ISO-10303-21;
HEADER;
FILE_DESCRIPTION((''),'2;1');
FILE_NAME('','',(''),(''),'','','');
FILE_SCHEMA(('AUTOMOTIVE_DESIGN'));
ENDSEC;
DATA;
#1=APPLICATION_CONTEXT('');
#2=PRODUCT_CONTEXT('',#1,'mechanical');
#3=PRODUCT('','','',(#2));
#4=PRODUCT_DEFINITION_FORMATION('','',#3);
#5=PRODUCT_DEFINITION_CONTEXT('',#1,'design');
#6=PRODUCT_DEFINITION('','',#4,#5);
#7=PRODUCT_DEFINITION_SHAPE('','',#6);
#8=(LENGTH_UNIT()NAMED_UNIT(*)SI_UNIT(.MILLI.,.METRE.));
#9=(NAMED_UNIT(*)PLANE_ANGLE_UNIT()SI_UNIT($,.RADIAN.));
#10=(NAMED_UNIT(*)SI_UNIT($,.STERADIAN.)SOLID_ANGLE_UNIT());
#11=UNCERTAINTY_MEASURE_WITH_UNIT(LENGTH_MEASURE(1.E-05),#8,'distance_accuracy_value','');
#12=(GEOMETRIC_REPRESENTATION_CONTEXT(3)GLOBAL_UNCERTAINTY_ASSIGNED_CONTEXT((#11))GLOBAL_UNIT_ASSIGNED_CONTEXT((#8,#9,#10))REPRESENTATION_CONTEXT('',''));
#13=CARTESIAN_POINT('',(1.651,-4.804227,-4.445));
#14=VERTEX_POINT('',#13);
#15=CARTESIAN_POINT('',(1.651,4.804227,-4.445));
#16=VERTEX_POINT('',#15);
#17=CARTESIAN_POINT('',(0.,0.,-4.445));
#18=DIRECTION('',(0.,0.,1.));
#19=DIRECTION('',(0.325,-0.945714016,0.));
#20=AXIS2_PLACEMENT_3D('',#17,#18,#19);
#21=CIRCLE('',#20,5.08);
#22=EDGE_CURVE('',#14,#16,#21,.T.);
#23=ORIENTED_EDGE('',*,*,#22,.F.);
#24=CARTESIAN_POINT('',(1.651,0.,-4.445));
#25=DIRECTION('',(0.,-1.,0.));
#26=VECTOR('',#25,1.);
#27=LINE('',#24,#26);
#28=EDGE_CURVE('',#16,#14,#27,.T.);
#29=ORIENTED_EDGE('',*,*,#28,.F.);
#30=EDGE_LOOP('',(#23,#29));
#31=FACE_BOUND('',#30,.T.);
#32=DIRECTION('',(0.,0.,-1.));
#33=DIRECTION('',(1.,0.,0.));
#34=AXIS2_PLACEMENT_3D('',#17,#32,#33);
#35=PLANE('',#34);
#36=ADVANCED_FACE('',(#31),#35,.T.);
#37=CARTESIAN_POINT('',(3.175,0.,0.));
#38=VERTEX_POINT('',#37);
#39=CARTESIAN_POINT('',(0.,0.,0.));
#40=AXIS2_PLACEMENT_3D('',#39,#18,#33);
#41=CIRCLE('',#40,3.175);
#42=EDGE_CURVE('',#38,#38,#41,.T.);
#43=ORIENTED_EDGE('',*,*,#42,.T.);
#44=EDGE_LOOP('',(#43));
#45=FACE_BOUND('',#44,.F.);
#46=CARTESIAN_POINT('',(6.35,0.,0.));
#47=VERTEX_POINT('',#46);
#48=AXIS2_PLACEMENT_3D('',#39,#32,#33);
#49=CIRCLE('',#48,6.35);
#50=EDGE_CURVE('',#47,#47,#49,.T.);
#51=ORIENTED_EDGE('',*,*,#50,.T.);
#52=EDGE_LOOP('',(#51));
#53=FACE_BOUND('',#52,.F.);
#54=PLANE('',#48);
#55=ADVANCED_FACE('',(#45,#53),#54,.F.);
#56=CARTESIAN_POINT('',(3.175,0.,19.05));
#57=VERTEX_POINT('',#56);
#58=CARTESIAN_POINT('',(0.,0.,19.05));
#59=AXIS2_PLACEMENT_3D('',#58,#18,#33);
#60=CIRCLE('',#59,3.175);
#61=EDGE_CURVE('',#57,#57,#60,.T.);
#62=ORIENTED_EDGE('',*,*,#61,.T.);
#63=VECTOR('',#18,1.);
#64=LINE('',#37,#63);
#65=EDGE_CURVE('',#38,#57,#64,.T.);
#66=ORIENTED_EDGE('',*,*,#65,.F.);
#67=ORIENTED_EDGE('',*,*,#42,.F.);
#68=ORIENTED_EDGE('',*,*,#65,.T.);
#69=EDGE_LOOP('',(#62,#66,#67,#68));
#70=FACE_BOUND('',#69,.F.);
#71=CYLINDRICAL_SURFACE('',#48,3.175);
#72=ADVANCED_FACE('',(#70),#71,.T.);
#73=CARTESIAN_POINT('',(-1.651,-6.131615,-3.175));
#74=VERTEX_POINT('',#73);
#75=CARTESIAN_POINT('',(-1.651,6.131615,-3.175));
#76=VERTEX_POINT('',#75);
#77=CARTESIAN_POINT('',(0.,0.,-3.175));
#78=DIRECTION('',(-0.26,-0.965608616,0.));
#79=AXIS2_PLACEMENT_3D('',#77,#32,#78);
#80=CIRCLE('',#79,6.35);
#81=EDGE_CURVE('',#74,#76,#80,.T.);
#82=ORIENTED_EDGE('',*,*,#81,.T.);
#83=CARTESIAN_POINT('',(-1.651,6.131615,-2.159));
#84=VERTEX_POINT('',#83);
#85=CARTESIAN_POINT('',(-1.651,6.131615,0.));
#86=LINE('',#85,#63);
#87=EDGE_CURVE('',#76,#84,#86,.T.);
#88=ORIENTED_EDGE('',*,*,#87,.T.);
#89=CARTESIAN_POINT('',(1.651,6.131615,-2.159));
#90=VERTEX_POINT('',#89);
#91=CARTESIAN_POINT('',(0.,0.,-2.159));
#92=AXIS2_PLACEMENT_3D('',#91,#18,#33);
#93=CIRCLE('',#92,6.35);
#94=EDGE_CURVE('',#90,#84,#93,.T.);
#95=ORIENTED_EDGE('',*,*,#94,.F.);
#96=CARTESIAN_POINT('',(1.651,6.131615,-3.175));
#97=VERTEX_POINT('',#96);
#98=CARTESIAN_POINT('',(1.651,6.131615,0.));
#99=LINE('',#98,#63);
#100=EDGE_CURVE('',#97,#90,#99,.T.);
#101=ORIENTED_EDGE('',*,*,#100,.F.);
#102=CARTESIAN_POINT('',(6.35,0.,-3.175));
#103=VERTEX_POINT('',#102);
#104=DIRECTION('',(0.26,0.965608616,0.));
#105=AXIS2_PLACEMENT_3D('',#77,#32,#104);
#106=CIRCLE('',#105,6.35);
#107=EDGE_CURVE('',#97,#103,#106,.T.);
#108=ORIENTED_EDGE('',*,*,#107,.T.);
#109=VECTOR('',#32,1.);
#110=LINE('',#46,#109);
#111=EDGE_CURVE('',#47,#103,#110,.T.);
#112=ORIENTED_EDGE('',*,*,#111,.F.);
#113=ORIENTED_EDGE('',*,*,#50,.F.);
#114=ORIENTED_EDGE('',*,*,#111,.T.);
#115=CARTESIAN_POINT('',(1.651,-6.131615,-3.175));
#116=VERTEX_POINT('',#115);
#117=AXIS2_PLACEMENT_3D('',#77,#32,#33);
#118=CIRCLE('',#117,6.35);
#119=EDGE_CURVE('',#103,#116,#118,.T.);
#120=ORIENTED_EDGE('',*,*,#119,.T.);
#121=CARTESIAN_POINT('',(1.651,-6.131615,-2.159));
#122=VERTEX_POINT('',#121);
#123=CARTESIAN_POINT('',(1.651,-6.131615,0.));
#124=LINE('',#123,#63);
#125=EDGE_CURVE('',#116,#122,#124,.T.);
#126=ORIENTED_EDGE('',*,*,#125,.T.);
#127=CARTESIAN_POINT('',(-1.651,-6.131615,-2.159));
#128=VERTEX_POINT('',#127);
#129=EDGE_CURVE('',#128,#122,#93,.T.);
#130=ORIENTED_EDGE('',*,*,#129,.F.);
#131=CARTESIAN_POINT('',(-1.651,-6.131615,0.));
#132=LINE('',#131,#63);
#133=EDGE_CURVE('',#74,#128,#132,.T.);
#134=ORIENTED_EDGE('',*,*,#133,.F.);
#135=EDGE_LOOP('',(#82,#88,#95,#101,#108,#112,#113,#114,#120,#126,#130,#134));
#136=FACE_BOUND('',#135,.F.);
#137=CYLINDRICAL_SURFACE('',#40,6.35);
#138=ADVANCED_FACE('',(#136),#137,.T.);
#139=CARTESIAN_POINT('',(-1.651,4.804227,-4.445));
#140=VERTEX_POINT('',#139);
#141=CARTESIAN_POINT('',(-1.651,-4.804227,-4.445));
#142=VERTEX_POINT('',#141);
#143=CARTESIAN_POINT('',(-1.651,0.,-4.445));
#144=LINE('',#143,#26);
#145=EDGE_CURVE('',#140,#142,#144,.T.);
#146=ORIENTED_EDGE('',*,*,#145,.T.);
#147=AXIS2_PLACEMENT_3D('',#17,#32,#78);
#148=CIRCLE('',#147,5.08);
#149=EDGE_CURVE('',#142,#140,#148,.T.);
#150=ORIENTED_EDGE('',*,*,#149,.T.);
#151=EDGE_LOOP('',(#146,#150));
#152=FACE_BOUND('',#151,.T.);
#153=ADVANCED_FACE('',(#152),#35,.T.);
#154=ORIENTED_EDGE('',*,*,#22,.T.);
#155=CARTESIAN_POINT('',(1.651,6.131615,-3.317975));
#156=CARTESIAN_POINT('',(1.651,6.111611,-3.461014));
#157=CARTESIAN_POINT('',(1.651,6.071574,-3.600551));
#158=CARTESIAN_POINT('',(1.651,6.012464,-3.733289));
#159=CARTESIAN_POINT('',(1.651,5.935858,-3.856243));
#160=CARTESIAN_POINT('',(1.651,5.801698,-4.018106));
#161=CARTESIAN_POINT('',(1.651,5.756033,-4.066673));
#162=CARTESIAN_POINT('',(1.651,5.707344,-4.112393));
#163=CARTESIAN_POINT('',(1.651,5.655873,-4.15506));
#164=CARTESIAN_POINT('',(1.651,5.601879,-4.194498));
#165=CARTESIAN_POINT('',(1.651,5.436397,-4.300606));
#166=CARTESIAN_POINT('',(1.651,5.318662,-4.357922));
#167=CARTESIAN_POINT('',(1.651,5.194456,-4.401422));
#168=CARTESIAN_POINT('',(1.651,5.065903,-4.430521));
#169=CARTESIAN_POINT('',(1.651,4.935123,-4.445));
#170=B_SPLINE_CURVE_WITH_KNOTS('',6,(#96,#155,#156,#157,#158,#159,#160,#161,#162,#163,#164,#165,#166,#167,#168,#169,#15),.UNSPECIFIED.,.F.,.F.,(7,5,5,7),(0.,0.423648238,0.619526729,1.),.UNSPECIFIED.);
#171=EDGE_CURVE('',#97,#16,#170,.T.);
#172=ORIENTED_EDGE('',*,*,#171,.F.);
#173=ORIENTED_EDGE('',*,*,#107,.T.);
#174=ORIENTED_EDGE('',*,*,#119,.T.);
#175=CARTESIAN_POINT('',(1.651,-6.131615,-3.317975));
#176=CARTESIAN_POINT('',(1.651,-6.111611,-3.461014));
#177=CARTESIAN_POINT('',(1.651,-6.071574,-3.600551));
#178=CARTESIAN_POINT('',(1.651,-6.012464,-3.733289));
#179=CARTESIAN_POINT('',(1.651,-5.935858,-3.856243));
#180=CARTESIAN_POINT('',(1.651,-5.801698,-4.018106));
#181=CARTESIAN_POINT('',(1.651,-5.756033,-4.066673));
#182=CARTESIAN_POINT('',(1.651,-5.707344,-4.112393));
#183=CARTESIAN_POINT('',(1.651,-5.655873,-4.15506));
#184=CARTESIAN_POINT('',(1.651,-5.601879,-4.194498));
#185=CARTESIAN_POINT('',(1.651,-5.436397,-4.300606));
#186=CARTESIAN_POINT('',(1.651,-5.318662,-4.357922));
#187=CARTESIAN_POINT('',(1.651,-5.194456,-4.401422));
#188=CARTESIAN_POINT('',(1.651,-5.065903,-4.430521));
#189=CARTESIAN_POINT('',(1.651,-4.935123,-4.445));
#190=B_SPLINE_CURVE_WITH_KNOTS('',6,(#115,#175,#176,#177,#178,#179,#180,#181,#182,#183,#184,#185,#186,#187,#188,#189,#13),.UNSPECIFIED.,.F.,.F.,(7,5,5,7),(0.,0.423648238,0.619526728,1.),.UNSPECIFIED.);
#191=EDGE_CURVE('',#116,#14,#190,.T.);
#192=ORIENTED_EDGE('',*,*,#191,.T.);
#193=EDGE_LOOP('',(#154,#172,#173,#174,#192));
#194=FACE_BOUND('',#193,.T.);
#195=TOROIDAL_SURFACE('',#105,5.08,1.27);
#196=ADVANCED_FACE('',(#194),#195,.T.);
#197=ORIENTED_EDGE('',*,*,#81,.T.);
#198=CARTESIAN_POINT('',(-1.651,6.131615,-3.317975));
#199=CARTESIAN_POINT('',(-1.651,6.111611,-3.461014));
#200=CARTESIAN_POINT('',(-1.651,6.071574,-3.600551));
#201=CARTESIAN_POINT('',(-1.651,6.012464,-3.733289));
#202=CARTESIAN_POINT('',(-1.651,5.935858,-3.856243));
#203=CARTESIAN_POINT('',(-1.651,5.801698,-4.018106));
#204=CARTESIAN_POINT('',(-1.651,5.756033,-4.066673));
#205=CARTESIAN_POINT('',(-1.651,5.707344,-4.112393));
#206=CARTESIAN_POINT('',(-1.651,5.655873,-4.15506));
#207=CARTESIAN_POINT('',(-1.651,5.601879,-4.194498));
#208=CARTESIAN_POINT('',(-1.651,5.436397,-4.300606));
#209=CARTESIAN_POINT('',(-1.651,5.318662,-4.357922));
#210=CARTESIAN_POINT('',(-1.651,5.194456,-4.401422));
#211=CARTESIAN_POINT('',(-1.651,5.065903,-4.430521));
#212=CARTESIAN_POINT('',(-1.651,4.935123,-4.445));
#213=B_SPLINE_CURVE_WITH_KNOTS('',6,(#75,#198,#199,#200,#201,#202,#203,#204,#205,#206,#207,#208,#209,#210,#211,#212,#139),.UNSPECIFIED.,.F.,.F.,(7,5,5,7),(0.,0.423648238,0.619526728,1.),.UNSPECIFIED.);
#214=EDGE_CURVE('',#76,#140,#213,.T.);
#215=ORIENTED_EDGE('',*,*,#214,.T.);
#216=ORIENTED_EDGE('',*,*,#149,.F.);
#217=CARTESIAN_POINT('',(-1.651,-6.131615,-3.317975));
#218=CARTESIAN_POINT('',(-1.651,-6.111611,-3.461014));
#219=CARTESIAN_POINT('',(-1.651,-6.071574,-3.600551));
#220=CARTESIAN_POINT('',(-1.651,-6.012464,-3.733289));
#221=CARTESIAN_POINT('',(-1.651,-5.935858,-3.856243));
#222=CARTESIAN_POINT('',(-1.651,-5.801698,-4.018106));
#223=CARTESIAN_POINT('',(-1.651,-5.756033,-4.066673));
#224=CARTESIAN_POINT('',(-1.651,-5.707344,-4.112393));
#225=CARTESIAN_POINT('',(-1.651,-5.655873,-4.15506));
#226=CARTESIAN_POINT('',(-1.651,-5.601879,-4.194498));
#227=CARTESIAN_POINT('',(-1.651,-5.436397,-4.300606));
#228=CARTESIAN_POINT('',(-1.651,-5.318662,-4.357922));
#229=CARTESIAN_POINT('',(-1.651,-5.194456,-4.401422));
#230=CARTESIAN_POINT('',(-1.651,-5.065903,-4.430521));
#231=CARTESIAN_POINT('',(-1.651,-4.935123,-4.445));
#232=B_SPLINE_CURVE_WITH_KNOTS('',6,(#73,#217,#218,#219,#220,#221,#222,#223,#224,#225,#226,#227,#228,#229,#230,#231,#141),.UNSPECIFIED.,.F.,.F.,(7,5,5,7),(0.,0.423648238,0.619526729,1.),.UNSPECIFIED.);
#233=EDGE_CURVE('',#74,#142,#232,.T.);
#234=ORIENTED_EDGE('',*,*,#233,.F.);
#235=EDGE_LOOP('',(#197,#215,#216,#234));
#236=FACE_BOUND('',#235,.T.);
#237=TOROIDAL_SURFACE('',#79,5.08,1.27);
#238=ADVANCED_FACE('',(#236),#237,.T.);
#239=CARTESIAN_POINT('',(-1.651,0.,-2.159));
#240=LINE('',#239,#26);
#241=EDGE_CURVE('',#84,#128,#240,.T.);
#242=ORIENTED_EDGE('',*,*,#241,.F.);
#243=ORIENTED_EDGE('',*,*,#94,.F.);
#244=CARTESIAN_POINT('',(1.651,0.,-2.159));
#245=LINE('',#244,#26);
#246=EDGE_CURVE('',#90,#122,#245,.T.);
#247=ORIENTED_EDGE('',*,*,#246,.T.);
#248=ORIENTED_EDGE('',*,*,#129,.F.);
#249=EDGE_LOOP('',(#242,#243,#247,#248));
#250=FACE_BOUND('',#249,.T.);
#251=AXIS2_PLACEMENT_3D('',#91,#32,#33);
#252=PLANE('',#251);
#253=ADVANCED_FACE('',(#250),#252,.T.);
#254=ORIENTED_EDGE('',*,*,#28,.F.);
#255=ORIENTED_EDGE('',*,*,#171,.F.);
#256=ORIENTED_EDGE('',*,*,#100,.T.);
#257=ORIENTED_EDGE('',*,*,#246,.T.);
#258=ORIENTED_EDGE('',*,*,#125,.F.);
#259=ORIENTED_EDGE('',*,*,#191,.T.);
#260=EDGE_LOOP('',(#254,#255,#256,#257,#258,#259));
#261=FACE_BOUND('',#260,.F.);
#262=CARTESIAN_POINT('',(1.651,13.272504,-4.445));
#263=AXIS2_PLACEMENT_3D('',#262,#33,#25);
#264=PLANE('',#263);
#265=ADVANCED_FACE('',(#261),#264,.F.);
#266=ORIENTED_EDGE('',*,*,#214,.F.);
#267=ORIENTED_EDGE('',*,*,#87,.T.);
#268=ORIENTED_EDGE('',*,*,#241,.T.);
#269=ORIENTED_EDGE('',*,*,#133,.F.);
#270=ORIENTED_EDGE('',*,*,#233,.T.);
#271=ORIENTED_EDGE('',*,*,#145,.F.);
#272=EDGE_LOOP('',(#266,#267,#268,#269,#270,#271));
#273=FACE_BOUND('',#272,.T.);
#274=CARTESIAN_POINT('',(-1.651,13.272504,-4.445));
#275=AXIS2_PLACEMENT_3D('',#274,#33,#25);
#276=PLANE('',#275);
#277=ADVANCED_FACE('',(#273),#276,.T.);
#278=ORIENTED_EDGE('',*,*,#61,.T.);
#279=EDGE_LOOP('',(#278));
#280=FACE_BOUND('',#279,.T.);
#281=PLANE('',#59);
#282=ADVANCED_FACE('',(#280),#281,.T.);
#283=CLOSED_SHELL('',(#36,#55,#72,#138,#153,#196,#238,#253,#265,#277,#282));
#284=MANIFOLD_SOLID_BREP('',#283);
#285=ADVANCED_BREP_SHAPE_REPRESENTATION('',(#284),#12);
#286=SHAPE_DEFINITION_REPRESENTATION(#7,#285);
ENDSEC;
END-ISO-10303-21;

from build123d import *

# Parameters (mm, degrees)
F0_R     = 3.175
F1_DEPTH = 19.05
F2_R     = 6.35
F3_DEPTH = 4.445
F4_W     = 3.302
F4_H     = 26.5450086477
F5_DEPTH = 2.286
F6_R     = 1.27


with BuildPart() as f1:
    # F0 (on Top) → F1 (new body)
    with BuildSketch(Plane.XY):
        Circle(F0_R)
    extrude(amount=F1_DEPTH)

    # F2 (on face) → F3 (join)
    with BuildSketch(Plane(origin=(0, 0, 0), x_dir=(1, 0, 0), z_dir=(0, 0, -1))):
        Circle(F2_R)
    extrude(amount=F3_DEPTH)

    # F4 (on face) → F5 (cut)
    with BuildSketch(Plane(origin=(0, 0, -4.445), x_dir=(1, 0, 0), z_dir=(0, 0, -1))):
        Rectangle(F4_W, F4_H)
    extrude(amount=-F5_DEPTH, mode=Mode.SUBTRACT)

    # F6
    f6_edges = [f1.edges().sort_by_distance(p)[0] for p in [
        (-6.35, 0, -4.445),
        (5.040156, 3.862554, -4.445),
        (5.040156, -3.862554, -4.445),
    ]]
    fillet(f6_edges, radius=F6_R)


solid = f1.part
